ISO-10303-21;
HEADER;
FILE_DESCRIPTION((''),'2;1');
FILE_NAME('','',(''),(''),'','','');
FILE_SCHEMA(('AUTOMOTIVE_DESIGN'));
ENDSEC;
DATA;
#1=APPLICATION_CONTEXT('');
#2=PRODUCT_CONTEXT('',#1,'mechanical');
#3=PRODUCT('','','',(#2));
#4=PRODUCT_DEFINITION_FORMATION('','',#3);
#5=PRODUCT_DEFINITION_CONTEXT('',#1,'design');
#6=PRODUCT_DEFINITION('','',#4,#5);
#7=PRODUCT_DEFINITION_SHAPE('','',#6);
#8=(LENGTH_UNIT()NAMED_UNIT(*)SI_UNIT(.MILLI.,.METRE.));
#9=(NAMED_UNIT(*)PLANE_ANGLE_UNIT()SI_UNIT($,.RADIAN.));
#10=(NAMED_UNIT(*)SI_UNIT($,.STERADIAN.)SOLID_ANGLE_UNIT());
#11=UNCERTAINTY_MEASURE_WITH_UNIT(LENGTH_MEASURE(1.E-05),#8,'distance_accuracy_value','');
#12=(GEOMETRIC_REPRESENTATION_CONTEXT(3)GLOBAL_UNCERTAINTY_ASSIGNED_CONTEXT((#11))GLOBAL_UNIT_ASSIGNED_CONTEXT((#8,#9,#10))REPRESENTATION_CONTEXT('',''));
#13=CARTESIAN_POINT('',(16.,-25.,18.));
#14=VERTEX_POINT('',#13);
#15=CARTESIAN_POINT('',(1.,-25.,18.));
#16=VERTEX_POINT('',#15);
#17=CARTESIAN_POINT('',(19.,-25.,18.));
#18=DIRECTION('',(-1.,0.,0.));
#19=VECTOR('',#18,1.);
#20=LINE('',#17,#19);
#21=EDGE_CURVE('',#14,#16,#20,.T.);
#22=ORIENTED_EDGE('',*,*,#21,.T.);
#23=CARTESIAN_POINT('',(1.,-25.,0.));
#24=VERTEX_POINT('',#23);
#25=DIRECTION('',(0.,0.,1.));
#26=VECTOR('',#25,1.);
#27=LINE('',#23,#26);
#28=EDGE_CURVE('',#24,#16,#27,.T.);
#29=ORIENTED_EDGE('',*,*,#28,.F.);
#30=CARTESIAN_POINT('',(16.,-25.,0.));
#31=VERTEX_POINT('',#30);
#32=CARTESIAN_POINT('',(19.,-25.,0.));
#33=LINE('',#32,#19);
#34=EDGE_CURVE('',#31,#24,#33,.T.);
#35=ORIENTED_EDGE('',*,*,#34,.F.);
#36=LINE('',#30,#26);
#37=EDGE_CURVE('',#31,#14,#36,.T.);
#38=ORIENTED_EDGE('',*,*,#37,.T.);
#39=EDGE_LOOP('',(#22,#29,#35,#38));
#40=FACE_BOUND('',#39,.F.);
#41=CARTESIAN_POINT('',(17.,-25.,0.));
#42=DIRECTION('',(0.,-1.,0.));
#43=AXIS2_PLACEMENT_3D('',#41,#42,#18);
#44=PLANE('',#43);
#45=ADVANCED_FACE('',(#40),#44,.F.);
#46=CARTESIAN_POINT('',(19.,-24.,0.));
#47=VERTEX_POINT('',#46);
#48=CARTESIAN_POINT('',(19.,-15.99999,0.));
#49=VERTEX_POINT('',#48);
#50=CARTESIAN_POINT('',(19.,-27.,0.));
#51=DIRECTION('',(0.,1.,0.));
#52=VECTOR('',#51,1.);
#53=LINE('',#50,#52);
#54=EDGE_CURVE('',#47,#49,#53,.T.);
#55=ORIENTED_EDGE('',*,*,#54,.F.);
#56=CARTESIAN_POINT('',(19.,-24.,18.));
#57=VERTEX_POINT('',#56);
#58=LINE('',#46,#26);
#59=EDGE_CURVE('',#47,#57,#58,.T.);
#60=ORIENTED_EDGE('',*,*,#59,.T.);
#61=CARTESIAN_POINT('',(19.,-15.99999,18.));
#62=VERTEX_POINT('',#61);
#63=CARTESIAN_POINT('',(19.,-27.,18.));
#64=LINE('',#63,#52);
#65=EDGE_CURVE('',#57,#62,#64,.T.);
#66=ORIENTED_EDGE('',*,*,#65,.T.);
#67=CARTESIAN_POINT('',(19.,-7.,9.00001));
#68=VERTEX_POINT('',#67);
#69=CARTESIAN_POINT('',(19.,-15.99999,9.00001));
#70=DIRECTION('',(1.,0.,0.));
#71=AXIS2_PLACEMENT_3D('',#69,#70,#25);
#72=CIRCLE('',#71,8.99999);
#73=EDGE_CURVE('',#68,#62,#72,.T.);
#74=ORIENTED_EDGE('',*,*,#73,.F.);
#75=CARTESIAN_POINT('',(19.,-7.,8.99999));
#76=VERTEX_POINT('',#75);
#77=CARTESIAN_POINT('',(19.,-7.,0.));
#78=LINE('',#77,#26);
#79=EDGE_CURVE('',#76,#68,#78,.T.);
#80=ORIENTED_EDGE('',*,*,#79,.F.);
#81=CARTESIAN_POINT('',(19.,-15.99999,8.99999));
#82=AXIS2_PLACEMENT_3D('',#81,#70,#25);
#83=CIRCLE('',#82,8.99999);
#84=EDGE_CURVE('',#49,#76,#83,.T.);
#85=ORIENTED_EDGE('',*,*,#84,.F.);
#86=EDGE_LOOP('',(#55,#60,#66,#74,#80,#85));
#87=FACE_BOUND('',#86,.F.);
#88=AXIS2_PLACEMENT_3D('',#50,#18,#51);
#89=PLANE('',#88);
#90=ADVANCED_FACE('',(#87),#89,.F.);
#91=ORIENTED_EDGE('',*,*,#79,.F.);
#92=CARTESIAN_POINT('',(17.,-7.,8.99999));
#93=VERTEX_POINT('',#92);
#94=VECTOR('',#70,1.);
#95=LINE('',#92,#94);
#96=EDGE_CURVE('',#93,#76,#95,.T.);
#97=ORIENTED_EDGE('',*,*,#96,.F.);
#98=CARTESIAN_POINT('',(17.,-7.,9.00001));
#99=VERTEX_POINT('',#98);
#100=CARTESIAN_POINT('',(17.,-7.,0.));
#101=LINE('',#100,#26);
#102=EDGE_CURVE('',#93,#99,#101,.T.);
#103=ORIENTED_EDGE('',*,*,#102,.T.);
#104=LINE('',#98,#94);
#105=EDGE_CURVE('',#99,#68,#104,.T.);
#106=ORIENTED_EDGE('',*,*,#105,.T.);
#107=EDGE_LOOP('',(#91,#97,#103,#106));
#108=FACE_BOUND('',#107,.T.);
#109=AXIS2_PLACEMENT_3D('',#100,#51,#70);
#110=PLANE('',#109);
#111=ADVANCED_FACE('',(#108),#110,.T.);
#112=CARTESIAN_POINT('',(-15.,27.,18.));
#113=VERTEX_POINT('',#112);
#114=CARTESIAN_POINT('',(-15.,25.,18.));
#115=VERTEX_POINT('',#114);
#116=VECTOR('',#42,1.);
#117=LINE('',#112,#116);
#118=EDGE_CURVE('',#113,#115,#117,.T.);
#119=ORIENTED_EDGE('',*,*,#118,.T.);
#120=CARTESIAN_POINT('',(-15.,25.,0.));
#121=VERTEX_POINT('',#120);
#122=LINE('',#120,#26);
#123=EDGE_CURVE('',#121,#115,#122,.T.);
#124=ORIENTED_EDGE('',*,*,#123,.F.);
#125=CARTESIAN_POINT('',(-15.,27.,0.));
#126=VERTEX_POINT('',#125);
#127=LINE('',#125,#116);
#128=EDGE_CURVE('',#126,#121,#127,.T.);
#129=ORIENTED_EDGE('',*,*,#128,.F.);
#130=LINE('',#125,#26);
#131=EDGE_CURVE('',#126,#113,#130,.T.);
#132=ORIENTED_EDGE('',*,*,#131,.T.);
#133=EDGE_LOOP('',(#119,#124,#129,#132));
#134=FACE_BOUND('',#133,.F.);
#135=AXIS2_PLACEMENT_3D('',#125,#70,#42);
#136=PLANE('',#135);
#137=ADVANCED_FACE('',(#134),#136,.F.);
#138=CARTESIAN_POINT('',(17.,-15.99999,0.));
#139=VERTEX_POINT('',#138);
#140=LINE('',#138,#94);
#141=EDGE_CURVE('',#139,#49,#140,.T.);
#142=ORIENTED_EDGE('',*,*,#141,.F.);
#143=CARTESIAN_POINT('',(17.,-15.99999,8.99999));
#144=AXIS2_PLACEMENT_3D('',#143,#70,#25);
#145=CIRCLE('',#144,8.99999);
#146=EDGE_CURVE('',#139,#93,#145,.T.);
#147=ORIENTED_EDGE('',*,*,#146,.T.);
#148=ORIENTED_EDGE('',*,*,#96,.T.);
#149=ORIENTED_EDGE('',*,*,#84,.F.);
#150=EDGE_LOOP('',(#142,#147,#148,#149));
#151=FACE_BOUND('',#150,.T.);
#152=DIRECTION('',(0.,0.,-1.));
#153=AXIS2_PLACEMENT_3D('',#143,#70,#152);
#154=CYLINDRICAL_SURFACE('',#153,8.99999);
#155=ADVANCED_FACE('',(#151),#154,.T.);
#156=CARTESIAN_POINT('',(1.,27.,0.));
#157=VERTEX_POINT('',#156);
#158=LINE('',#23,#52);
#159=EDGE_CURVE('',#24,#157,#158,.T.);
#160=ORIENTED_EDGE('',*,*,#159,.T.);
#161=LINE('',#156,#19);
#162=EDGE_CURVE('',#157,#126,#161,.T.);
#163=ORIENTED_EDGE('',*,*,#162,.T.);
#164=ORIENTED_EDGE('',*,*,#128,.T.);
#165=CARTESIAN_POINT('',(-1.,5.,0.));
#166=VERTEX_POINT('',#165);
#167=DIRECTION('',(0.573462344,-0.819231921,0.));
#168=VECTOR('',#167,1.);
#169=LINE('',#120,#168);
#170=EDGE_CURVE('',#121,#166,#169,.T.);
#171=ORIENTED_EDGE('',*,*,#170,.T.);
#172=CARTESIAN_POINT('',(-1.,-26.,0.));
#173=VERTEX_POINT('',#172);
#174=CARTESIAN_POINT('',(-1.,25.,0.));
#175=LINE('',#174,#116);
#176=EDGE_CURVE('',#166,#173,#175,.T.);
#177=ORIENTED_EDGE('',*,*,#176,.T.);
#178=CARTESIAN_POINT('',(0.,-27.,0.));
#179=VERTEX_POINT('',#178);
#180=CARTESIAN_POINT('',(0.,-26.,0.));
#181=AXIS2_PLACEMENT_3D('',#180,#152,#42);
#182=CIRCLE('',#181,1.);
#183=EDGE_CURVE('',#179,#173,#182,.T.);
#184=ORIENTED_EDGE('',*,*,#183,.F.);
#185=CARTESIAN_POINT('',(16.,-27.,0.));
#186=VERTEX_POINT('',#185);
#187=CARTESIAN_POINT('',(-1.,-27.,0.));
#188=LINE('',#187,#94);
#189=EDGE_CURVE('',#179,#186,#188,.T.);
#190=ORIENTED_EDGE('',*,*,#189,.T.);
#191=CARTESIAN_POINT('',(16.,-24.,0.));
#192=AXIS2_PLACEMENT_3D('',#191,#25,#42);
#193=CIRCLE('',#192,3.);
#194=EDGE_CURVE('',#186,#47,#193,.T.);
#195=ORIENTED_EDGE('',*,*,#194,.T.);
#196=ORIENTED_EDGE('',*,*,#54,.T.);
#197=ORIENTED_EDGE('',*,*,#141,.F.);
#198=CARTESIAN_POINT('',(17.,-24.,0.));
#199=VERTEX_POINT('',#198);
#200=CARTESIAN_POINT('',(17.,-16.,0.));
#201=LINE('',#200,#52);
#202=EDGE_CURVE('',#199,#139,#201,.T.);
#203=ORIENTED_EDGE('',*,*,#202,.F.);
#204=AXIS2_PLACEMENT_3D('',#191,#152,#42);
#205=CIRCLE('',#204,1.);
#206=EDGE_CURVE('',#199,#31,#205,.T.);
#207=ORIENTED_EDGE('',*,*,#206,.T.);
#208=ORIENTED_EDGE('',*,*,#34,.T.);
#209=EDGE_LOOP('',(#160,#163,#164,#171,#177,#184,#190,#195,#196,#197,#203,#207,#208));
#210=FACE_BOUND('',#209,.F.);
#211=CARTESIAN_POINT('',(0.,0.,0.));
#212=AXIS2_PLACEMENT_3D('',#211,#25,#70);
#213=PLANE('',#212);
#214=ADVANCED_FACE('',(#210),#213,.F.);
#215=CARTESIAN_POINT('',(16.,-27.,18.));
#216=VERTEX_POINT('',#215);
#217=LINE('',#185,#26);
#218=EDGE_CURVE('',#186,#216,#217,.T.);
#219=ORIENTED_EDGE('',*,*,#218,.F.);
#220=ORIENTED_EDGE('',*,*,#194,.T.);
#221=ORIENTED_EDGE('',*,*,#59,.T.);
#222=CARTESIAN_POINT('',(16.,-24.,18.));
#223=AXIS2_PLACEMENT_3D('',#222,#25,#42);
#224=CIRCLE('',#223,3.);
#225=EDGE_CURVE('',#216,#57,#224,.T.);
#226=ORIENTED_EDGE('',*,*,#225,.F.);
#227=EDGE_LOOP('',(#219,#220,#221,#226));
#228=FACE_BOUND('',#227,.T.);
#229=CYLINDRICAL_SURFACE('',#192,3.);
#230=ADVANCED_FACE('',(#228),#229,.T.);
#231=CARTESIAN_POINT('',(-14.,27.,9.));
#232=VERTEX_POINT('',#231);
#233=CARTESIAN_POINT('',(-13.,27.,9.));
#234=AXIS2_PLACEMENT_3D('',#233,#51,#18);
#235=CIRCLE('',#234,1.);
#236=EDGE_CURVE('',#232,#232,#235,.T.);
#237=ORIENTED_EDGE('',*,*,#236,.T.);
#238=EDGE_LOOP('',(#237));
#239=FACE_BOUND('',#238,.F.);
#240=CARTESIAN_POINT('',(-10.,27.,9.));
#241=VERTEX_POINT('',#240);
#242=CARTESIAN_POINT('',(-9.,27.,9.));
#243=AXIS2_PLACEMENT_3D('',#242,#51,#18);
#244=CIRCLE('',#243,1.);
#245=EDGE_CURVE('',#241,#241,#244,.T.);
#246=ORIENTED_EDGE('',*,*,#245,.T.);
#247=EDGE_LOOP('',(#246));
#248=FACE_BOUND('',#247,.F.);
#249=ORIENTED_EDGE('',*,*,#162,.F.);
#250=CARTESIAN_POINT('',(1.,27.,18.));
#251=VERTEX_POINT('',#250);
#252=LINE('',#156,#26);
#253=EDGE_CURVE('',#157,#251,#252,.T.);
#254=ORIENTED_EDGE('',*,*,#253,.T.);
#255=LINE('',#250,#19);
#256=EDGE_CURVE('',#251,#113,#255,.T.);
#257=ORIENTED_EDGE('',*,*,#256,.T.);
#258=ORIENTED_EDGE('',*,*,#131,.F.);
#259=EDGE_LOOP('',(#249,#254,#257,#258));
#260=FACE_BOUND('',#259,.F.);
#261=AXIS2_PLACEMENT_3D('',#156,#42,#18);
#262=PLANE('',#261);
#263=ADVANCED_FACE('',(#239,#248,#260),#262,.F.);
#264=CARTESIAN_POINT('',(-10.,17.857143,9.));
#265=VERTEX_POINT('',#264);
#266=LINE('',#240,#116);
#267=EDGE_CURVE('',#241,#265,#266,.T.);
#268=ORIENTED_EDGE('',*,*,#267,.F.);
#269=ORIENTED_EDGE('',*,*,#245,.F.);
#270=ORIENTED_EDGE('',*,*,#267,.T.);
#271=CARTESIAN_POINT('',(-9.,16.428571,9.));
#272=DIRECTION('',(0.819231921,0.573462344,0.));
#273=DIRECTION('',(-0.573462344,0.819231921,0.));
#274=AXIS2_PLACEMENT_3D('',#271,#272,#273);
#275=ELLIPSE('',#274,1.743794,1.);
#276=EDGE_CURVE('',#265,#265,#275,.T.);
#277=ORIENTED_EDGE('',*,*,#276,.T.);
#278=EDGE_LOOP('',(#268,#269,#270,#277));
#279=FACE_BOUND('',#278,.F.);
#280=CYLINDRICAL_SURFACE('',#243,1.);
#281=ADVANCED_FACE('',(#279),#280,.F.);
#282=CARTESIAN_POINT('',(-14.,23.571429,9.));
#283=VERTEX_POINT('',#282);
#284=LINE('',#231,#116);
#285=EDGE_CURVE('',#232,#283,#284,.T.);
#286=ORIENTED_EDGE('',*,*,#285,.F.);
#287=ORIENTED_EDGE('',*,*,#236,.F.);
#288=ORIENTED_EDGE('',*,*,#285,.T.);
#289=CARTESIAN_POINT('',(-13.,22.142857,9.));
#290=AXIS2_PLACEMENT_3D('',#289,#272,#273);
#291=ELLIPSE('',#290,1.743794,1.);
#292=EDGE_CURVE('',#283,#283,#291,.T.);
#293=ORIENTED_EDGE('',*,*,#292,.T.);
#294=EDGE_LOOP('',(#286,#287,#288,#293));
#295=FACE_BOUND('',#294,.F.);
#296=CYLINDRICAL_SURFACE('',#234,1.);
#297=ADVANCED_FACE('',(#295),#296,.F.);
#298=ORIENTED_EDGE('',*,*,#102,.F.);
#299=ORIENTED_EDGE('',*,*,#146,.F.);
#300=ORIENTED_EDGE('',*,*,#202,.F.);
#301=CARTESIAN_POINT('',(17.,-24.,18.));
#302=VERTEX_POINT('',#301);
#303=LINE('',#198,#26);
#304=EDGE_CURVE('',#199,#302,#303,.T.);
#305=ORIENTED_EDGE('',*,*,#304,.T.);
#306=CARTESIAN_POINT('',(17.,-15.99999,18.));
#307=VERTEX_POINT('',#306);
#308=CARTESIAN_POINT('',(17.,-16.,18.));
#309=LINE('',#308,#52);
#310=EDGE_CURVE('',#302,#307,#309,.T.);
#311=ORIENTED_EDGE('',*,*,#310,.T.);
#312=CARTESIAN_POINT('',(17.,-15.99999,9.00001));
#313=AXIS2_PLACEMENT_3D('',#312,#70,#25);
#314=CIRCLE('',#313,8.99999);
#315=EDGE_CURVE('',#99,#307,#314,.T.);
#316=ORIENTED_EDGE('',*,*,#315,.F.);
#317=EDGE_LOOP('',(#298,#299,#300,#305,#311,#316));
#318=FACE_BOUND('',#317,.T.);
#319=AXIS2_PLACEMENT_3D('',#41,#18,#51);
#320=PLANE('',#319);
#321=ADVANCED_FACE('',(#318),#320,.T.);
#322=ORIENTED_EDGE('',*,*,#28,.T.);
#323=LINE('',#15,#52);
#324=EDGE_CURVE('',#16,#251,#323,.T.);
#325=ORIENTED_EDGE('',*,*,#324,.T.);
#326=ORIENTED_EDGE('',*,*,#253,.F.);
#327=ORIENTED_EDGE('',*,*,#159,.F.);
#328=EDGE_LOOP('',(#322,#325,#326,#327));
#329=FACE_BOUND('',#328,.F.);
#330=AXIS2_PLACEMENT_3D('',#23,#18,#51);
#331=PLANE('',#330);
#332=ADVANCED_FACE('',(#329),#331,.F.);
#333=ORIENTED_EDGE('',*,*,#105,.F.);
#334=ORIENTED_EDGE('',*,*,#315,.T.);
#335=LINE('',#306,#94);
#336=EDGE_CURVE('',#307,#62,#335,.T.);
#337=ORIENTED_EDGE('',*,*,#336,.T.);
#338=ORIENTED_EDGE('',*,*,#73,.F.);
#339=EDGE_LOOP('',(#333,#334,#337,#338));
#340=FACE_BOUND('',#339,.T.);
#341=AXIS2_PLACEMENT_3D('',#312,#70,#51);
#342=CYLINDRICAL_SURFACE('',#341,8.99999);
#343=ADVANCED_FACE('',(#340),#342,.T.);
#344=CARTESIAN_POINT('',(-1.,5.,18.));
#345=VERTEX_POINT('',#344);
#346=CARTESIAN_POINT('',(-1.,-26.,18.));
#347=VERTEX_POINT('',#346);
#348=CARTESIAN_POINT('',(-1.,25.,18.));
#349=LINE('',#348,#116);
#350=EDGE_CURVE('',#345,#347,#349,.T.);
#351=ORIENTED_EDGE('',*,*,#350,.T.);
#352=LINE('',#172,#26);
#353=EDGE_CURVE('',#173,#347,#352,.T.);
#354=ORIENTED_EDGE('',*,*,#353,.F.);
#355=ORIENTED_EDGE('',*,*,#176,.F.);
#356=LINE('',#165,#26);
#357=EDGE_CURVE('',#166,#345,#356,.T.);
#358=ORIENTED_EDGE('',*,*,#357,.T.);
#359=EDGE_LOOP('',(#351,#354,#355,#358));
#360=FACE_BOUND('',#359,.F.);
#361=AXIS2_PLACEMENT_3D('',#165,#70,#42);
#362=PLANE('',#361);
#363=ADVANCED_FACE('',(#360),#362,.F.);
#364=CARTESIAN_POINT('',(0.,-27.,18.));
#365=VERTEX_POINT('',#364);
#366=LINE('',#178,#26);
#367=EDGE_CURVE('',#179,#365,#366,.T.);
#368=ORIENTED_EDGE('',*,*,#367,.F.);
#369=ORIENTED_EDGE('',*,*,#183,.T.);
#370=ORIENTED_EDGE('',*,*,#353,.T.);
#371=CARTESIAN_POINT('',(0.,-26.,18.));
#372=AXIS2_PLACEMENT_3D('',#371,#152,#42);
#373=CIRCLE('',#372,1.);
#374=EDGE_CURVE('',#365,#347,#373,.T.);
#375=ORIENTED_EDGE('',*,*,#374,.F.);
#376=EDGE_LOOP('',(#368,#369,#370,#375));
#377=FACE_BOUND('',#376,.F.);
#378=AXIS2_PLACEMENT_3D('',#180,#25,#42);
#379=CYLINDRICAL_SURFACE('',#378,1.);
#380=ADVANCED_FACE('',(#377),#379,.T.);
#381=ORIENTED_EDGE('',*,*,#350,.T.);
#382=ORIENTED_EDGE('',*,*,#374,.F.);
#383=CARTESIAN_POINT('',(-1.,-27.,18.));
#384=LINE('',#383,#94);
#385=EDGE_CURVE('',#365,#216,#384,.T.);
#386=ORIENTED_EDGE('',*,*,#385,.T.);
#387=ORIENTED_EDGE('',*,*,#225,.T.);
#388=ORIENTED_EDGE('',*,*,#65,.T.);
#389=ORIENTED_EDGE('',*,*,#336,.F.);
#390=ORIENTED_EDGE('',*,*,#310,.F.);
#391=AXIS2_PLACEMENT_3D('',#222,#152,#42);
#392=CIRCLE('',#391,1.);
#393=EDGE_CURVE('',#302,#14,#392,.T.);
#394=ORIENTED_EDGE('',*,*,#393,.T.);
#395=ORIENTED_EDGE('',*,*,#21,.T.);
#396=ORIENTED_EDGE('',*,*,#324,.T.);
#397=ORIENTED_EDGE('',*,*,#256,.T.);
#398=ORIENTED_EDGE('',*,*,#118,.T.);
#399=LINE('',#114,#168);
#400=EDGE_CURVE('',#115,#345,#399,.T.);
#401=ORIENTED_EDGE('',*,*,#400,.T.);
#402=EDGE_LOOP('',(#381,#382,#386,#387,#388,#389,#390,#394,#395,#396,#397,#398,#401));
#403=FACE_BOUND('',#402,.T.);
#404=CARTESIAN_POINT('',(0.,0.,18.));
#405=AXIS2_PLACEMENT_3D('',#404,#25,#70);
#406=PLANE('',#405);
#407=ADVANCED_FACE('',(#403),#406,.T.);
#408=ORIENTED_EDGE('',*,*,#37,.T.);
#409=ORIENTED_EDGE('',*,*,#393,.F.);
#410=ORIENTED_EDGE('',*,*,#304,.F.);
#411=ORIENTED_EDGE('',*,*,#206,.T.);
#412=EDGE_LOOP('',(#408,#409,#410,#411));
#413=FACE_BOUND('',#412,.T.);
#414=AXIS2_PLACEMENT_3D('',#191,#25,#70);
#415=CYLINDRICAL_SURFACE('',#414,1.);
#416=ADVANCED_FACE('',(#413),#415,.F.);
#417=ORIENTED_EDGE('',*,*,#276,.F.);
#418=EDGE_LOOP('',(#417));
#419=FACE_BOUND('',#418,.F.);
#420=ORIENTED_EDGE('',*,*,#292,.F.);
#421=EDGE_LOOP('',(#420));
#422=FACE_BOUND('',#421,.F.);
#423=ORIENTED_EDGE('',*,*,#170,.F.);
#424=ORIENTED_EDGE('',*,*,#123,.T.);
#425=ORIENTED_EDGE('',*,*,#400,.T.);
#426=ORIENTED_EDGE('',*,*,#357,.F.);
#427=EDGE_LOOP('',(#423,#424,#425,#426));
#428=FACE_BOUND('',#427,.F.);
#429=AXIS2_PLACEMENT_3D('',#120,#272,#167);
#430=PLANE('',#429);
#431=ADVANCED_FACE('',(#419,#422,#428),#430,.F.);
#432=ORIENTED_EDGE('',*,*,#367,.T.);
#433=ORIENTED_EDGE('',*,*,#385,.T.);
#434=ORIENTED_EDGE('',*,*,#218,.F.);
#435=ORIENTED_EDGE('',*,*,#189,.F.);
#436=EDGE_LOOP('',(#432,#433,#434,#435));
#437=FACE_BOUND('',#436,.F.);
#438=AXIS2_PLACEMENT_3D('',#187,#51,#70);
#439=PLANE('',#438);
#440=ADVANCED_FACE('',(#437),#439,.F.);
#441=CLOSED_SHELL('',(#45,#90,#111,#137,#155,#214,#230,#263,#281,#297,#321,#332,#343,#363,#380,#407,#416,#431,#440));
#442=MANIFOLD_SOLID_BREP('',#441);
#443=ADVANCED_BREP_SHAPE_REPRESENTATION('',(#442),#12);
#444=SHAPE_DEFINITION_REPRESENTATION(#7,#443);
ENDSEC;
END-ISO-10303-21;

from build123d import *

# Parameters (mm, degrees)
F0_W     = 2
F0_H     = 18
F1_DEPTH = 18
F2_R     = 1
F3_DEPTH = 25
F4_R     = 3
F5_R     = 1
F6_R     = 1
F7_R     = 8.99999


# Not quite as in the source:
# - a fillet or chamfer is up to 0.001 mm smaller than in the source, because OpenCascade refuses the exact size


with BuildPart() as f1:
    # F0 (on Top) → F1 (new body)
    with BuildSketch(Plane.XY):
        Polygon((-1, 5), (-1, -25), (1, -25), (1, 25), (-1, 25), align=None)
        Polygon((1, -25), (-1, -25), (-1, -27), (19, -27), (19, -25), (17, -25), align=None)
        Polygon((-15, 25), (-1, 5), (-1, 25), align=None)
        Polygon((-1, 25), (1, 25), (1, 27), (-15, 27), (-15, 25), align=None)
        with Locations((18, -16)):
            Rectangle(F0_W, F0_H)
    extrude(amount=F1_DEPTH)

    # F2 (on face) → F3 (cut)
    with BuildSketch(Plane(origin=(0, 27, 0), x_dir=(-1, 0, 0), z_dir=(0, 1, 0))):
        with Locations((9, 9)):
            Circle(F2_R)
        with Locations((13, 9)):
            Circle(F2_R)
    extrude(amount=-F3_DEPTH, mode=Mode.SUBTRACT)

    # F4
    f4_edges = [f1.edges().sort_by_distance(p)[0] for p in [
        (19, -27, 9),
    ]]
    fillet(f4_edges, radius=F4_R)

    # F5
    f5_edges = [f1.edges().sort_by_distance(p)[0] for p in [
        (17, -25, 9),
    ]]
    fillet(f5_edges, radius=F5_R)

    # F6
    f6_edges = [f1.edges().sort_by_distance(p)[0] for p in [
        (-1, -27, 9),
    ]]
    fillet(f6_edges, radius=F6_R)

    # F7 (radius 9 in the source; OpenCascade refuses exactly that, so slightly less here)
    f7_edges = [f1.edges().sort_by_distance(p)[0] for p in [
        (18, -7, 18),
        (18, -7, 0),
    ]]
    fillet(f7_edges, radius=F7_R)


solid = f1.part
